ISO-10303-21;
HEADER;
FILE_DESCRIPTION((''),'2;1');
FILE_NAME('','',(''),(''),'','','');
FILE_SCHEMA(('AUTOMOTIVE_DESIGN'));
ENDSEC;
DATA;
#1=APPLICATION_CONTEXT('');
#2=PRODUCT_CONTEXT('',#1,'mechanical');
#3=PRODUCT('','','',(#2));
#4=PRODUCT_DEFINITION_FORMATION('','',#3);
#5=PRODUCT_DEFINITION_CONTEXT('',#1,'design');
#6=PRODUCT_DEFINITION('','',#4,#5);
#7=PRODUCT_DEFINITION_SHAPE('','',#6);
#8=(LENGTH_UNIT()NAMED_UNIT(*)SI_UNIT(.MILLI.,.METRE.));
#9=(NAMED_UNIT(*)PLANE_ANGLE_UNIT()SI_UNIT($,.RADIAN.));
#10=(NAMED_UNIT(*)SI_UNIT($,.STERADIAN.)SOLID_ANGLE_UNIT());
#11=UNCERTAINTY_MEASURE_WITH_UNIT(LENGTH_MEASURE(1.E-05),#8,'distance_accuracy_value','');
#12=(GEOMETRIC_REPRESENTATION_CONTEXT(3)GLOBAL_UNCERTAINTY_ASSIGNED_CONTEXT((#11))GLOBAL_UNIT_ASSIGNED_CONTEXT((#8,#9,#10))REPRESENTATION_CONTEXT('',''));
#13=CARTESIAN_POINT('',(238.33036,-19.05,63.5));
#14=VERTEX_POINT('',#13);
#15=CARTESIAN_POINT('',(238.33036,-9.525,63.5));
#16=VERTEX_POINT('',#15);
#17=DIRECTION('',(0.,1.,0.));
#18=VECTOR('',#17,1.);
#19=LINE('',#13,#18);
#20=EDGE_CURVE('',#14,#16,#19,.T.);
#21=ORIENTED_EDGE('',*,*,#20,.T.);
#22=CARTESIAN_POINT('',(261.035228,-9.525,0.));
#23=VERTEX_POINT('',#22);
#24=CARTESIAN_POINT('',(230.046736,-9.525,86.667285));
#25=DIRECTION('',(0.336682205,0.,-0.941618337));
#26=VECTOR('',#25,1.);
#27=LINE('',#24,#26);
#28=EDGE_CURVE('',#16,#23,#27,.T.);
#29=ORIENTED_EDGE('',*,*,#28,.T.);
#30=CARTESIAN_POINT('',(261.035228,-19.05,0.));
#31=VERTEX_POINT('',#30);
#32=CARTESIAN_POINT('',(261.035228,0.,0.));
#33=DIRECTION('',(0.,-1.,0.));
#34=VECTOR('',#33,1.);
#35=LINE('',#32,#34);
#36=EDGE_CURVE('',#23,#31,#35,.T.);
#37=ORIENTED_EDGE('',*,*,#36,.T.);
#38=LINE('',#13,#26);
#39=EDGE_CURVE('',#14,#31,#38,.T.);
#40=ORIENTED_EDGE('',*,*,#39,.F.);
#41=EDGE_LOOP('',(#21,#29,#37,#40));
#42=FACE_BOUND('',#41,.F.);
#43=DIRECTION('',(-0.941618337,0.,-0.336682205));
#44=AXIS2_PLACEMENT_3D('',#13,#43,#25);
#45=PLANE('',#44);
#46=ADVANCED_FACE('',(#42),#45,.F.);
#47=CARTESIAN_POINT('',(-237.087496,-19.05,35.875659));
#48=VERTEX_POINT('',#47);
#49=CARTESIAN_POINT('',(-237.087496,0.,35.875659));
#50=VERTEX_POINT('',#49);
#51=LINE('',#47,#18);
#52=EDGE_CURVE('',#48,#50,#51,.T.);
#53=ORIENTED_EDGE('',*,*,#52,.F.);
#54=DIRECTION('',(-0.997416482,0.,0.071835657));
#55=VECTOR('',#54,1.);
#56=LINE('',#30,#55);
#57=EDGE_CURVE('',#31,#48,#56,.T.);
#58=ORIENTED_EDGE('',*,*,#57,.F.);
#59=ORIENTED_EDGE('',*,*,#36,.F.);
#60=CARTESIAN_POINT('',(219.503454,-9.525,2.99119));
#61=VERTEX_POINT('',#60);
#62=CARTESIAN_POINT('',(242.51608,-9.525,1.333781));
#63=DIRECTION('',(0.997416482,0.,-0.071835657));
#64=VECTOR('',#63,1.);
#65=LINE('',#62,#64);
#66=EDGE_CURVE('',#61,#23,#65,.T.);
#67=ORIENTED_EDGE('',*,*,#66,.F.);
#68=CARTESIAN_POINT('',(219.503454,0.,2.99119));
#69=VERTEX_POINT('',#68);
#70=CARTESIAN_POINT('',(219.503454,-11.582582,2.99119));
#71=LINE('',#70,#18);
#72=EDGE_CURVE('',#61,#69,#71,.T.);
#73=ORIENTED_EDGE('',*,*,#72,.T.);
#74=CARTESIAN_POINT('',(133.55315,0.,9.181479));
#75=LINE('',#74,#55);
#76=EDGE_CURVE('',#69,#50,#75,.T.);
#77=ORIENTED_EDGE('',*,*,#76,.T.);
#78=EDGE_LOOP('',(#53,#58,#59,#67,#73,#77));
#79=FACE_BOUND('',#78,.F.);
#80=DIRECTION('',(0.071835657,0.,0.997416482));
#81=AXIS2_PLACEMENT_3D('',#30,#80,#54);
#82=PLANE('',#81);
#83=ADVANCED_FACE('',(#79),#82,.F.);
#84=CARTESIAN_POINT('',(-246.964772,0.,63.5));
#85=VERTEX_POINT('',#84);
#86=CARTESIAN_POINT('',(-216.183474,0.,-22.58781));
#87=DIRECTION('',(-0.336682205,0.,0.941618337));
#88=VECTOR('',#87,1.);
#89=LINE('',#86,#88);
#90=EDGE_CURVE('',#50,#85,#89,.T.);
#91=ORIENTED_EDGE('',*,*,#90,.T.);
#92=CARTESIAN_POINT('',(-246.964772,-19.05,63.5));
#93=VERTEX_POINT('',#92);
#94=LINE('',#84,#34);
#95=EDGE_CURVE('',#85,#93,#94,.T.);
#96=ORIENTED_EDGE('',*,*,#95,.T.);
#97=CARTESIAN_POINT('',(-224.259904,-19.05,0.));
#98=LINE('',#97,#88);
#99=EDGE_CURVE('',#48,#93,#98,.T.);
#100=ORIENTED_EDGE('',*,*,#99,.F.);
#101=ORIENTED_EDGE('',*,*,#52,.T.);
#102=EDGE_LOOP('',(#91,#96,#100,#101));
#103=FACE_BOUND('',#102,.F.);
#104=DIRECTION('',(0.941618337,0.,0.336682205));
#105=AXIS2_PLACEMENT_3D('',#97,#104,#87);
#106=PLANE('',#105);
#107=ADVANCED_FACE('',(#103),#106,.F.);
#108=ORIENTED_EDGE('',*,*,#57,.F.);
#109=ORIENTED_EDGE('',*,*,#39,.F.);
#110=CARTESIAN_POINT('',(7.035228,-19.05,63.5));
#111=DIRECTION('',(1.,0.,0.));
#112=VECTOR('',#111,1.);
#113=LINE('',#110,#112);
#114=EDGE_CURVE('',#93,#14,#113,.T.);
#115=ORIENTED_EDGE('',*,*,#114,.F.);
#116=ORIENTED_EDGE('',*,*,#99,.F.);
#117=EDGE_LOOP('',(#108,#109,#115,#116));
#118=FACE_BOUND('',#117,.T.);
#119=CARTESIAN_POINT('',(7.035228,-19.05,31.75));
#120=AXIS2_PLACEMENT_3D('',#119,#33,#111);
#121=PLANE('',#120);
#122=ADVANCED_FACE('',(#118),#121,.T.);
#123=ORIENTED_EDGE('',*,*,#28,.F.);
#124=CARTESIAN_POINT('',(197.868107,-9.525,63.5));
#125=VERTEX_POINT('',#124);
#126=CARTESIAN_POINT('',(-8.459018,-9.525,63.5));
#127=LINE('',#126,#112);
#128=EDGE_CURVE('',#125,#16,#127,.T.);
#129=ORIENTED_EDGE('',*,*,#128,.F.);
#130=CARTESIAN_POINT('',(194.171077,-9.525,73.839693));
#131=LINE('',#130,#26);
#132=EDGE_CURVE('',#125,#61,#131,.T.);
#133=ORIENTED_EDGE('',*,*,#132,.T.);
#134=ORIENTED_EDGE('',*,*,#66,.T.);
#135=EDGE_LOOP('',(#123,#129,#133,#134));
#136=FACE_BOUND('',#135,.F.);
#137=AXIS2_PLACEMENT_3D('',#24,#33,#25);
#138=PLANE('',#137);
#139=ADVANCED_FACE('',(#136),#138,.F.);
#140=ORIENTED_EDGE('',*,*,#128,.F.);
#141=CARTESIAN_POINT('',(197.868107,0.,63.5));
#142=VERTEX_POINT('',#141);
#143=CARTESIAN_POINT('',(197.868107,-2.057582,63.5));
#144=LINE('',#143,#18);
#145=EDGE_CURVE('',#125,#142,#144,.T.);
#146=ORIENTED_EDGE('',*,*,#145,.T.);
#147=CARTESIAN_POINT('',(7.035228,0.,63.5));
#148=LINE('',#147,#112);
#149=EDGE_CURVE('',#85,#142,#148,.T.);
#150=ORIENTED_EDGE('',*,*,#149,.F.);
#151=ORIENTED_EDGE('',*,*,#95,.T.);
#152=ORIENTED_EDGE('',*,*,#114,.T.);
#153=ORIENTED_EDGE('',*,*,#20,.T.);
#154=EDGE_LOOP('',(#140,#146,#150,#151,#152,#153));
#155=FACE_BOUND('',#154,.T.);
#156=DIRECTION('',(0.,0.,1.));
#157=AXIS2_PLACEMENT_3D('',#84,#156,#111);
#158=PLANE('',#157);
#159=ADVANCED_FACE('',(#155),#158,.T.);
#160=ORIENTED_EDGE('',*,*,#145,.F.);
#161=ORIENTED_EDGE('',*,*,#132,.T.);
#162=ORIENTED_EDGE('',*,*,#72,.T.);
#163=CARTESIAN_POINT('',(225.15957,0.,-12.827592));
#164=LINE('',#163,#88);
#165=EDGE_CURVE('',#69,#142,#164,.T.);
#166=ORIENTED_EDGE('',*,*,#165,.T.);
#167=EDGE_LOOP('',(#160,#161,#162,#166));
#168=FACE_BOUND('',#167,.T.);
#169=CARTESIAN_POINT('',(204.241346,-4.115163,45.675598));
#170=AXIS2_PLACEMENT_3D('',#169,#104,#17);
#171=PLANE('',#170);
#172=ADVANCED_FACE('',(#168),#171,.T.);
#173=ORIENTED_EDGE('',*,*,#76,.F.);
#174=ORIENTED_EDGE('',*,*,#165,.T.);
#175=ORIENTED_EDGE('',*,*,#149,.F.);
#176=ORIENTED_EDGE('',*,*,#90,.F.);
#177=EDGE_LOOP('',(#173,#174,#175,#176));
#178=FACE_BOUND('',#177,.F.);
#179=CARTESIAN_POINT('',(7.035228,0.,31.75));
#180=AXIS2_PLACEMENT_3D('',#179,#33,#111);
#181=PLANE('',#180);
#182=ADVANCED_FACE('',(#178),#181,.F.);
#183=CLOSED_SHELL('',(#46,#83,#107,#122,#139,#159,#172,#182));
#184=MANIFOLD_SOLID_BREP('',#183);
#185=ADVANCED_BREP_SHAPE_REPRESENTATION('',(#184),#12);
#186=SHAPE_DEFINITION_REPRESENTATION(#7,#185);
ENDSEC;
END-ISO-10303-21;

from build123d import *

# Parameters (mm, degrees)
F0_W     = 508
F0_H     = 63.5
F1_DEPTH = 19.05
F3_DEPTH = 50.8
F5_DEPTH = 50.8
F7_DEPTH = 38.1
F9_DEPTH = 38.1


with BuildPart() as f1:
    # F0 (on Front) → F1 (new body)
    with BuildSketch(Plane.XZ):
        with Locations((7.0352284261, 31.75)):
            Rectangle(F0_W, F0_H)
    extrude(amount=F1_DEPTH)

    # F2 (on face) → F3 (cut)
    with BuildSketch(Plane.XZ.offset(19.05)):
        Polygon((-224.2599035735, 0), (-246.9647715739, 63.5), (-246.9647715739, 0), align=None)
    extrude(amount=-F3_DEPTH, mode=Mode.SUBTRACT)

    # F4 (on face) → F5 (cut)
    with BuildSketch(Plane.XZ.offset(19.05)):
        Polygon((261.0352284261, 0), (-237.0874956021, 35.8756586385), (-224.2599035735, 0), align=None)
    extrude(amount=-F5_DEPTH, mode=Mode.SUBTRACT)

    # F6 (on face) → F7 (cut)
    with BuildSketch(Plane.XZ.offset(19.05)):
        Polygon((238.3303604257, 63.5), (261.0352284261, 0), (261.0352284261, 63.5), align=None)
    extrude(amount=-F7_DEPTH, mode=Mode.SUBTRACT)

    # F8 (on face) → F9 (cut)
    with BuildSketch(Plane(origin=(231.445604258, 0, 82.7549904558), x_dir=(0, 1, 0), z_dir=(0.941618337, 0, 0.3366822055))):
        Polygon((-9.525, 4.1548628118), (-9.525, -87.885916413), (0, -87.885916413), (0, 40.5242251848), align=None)
    extrude(amount=-F9_DEPTH, mode=Mode.SUBTRACT)


solid = f1.part
